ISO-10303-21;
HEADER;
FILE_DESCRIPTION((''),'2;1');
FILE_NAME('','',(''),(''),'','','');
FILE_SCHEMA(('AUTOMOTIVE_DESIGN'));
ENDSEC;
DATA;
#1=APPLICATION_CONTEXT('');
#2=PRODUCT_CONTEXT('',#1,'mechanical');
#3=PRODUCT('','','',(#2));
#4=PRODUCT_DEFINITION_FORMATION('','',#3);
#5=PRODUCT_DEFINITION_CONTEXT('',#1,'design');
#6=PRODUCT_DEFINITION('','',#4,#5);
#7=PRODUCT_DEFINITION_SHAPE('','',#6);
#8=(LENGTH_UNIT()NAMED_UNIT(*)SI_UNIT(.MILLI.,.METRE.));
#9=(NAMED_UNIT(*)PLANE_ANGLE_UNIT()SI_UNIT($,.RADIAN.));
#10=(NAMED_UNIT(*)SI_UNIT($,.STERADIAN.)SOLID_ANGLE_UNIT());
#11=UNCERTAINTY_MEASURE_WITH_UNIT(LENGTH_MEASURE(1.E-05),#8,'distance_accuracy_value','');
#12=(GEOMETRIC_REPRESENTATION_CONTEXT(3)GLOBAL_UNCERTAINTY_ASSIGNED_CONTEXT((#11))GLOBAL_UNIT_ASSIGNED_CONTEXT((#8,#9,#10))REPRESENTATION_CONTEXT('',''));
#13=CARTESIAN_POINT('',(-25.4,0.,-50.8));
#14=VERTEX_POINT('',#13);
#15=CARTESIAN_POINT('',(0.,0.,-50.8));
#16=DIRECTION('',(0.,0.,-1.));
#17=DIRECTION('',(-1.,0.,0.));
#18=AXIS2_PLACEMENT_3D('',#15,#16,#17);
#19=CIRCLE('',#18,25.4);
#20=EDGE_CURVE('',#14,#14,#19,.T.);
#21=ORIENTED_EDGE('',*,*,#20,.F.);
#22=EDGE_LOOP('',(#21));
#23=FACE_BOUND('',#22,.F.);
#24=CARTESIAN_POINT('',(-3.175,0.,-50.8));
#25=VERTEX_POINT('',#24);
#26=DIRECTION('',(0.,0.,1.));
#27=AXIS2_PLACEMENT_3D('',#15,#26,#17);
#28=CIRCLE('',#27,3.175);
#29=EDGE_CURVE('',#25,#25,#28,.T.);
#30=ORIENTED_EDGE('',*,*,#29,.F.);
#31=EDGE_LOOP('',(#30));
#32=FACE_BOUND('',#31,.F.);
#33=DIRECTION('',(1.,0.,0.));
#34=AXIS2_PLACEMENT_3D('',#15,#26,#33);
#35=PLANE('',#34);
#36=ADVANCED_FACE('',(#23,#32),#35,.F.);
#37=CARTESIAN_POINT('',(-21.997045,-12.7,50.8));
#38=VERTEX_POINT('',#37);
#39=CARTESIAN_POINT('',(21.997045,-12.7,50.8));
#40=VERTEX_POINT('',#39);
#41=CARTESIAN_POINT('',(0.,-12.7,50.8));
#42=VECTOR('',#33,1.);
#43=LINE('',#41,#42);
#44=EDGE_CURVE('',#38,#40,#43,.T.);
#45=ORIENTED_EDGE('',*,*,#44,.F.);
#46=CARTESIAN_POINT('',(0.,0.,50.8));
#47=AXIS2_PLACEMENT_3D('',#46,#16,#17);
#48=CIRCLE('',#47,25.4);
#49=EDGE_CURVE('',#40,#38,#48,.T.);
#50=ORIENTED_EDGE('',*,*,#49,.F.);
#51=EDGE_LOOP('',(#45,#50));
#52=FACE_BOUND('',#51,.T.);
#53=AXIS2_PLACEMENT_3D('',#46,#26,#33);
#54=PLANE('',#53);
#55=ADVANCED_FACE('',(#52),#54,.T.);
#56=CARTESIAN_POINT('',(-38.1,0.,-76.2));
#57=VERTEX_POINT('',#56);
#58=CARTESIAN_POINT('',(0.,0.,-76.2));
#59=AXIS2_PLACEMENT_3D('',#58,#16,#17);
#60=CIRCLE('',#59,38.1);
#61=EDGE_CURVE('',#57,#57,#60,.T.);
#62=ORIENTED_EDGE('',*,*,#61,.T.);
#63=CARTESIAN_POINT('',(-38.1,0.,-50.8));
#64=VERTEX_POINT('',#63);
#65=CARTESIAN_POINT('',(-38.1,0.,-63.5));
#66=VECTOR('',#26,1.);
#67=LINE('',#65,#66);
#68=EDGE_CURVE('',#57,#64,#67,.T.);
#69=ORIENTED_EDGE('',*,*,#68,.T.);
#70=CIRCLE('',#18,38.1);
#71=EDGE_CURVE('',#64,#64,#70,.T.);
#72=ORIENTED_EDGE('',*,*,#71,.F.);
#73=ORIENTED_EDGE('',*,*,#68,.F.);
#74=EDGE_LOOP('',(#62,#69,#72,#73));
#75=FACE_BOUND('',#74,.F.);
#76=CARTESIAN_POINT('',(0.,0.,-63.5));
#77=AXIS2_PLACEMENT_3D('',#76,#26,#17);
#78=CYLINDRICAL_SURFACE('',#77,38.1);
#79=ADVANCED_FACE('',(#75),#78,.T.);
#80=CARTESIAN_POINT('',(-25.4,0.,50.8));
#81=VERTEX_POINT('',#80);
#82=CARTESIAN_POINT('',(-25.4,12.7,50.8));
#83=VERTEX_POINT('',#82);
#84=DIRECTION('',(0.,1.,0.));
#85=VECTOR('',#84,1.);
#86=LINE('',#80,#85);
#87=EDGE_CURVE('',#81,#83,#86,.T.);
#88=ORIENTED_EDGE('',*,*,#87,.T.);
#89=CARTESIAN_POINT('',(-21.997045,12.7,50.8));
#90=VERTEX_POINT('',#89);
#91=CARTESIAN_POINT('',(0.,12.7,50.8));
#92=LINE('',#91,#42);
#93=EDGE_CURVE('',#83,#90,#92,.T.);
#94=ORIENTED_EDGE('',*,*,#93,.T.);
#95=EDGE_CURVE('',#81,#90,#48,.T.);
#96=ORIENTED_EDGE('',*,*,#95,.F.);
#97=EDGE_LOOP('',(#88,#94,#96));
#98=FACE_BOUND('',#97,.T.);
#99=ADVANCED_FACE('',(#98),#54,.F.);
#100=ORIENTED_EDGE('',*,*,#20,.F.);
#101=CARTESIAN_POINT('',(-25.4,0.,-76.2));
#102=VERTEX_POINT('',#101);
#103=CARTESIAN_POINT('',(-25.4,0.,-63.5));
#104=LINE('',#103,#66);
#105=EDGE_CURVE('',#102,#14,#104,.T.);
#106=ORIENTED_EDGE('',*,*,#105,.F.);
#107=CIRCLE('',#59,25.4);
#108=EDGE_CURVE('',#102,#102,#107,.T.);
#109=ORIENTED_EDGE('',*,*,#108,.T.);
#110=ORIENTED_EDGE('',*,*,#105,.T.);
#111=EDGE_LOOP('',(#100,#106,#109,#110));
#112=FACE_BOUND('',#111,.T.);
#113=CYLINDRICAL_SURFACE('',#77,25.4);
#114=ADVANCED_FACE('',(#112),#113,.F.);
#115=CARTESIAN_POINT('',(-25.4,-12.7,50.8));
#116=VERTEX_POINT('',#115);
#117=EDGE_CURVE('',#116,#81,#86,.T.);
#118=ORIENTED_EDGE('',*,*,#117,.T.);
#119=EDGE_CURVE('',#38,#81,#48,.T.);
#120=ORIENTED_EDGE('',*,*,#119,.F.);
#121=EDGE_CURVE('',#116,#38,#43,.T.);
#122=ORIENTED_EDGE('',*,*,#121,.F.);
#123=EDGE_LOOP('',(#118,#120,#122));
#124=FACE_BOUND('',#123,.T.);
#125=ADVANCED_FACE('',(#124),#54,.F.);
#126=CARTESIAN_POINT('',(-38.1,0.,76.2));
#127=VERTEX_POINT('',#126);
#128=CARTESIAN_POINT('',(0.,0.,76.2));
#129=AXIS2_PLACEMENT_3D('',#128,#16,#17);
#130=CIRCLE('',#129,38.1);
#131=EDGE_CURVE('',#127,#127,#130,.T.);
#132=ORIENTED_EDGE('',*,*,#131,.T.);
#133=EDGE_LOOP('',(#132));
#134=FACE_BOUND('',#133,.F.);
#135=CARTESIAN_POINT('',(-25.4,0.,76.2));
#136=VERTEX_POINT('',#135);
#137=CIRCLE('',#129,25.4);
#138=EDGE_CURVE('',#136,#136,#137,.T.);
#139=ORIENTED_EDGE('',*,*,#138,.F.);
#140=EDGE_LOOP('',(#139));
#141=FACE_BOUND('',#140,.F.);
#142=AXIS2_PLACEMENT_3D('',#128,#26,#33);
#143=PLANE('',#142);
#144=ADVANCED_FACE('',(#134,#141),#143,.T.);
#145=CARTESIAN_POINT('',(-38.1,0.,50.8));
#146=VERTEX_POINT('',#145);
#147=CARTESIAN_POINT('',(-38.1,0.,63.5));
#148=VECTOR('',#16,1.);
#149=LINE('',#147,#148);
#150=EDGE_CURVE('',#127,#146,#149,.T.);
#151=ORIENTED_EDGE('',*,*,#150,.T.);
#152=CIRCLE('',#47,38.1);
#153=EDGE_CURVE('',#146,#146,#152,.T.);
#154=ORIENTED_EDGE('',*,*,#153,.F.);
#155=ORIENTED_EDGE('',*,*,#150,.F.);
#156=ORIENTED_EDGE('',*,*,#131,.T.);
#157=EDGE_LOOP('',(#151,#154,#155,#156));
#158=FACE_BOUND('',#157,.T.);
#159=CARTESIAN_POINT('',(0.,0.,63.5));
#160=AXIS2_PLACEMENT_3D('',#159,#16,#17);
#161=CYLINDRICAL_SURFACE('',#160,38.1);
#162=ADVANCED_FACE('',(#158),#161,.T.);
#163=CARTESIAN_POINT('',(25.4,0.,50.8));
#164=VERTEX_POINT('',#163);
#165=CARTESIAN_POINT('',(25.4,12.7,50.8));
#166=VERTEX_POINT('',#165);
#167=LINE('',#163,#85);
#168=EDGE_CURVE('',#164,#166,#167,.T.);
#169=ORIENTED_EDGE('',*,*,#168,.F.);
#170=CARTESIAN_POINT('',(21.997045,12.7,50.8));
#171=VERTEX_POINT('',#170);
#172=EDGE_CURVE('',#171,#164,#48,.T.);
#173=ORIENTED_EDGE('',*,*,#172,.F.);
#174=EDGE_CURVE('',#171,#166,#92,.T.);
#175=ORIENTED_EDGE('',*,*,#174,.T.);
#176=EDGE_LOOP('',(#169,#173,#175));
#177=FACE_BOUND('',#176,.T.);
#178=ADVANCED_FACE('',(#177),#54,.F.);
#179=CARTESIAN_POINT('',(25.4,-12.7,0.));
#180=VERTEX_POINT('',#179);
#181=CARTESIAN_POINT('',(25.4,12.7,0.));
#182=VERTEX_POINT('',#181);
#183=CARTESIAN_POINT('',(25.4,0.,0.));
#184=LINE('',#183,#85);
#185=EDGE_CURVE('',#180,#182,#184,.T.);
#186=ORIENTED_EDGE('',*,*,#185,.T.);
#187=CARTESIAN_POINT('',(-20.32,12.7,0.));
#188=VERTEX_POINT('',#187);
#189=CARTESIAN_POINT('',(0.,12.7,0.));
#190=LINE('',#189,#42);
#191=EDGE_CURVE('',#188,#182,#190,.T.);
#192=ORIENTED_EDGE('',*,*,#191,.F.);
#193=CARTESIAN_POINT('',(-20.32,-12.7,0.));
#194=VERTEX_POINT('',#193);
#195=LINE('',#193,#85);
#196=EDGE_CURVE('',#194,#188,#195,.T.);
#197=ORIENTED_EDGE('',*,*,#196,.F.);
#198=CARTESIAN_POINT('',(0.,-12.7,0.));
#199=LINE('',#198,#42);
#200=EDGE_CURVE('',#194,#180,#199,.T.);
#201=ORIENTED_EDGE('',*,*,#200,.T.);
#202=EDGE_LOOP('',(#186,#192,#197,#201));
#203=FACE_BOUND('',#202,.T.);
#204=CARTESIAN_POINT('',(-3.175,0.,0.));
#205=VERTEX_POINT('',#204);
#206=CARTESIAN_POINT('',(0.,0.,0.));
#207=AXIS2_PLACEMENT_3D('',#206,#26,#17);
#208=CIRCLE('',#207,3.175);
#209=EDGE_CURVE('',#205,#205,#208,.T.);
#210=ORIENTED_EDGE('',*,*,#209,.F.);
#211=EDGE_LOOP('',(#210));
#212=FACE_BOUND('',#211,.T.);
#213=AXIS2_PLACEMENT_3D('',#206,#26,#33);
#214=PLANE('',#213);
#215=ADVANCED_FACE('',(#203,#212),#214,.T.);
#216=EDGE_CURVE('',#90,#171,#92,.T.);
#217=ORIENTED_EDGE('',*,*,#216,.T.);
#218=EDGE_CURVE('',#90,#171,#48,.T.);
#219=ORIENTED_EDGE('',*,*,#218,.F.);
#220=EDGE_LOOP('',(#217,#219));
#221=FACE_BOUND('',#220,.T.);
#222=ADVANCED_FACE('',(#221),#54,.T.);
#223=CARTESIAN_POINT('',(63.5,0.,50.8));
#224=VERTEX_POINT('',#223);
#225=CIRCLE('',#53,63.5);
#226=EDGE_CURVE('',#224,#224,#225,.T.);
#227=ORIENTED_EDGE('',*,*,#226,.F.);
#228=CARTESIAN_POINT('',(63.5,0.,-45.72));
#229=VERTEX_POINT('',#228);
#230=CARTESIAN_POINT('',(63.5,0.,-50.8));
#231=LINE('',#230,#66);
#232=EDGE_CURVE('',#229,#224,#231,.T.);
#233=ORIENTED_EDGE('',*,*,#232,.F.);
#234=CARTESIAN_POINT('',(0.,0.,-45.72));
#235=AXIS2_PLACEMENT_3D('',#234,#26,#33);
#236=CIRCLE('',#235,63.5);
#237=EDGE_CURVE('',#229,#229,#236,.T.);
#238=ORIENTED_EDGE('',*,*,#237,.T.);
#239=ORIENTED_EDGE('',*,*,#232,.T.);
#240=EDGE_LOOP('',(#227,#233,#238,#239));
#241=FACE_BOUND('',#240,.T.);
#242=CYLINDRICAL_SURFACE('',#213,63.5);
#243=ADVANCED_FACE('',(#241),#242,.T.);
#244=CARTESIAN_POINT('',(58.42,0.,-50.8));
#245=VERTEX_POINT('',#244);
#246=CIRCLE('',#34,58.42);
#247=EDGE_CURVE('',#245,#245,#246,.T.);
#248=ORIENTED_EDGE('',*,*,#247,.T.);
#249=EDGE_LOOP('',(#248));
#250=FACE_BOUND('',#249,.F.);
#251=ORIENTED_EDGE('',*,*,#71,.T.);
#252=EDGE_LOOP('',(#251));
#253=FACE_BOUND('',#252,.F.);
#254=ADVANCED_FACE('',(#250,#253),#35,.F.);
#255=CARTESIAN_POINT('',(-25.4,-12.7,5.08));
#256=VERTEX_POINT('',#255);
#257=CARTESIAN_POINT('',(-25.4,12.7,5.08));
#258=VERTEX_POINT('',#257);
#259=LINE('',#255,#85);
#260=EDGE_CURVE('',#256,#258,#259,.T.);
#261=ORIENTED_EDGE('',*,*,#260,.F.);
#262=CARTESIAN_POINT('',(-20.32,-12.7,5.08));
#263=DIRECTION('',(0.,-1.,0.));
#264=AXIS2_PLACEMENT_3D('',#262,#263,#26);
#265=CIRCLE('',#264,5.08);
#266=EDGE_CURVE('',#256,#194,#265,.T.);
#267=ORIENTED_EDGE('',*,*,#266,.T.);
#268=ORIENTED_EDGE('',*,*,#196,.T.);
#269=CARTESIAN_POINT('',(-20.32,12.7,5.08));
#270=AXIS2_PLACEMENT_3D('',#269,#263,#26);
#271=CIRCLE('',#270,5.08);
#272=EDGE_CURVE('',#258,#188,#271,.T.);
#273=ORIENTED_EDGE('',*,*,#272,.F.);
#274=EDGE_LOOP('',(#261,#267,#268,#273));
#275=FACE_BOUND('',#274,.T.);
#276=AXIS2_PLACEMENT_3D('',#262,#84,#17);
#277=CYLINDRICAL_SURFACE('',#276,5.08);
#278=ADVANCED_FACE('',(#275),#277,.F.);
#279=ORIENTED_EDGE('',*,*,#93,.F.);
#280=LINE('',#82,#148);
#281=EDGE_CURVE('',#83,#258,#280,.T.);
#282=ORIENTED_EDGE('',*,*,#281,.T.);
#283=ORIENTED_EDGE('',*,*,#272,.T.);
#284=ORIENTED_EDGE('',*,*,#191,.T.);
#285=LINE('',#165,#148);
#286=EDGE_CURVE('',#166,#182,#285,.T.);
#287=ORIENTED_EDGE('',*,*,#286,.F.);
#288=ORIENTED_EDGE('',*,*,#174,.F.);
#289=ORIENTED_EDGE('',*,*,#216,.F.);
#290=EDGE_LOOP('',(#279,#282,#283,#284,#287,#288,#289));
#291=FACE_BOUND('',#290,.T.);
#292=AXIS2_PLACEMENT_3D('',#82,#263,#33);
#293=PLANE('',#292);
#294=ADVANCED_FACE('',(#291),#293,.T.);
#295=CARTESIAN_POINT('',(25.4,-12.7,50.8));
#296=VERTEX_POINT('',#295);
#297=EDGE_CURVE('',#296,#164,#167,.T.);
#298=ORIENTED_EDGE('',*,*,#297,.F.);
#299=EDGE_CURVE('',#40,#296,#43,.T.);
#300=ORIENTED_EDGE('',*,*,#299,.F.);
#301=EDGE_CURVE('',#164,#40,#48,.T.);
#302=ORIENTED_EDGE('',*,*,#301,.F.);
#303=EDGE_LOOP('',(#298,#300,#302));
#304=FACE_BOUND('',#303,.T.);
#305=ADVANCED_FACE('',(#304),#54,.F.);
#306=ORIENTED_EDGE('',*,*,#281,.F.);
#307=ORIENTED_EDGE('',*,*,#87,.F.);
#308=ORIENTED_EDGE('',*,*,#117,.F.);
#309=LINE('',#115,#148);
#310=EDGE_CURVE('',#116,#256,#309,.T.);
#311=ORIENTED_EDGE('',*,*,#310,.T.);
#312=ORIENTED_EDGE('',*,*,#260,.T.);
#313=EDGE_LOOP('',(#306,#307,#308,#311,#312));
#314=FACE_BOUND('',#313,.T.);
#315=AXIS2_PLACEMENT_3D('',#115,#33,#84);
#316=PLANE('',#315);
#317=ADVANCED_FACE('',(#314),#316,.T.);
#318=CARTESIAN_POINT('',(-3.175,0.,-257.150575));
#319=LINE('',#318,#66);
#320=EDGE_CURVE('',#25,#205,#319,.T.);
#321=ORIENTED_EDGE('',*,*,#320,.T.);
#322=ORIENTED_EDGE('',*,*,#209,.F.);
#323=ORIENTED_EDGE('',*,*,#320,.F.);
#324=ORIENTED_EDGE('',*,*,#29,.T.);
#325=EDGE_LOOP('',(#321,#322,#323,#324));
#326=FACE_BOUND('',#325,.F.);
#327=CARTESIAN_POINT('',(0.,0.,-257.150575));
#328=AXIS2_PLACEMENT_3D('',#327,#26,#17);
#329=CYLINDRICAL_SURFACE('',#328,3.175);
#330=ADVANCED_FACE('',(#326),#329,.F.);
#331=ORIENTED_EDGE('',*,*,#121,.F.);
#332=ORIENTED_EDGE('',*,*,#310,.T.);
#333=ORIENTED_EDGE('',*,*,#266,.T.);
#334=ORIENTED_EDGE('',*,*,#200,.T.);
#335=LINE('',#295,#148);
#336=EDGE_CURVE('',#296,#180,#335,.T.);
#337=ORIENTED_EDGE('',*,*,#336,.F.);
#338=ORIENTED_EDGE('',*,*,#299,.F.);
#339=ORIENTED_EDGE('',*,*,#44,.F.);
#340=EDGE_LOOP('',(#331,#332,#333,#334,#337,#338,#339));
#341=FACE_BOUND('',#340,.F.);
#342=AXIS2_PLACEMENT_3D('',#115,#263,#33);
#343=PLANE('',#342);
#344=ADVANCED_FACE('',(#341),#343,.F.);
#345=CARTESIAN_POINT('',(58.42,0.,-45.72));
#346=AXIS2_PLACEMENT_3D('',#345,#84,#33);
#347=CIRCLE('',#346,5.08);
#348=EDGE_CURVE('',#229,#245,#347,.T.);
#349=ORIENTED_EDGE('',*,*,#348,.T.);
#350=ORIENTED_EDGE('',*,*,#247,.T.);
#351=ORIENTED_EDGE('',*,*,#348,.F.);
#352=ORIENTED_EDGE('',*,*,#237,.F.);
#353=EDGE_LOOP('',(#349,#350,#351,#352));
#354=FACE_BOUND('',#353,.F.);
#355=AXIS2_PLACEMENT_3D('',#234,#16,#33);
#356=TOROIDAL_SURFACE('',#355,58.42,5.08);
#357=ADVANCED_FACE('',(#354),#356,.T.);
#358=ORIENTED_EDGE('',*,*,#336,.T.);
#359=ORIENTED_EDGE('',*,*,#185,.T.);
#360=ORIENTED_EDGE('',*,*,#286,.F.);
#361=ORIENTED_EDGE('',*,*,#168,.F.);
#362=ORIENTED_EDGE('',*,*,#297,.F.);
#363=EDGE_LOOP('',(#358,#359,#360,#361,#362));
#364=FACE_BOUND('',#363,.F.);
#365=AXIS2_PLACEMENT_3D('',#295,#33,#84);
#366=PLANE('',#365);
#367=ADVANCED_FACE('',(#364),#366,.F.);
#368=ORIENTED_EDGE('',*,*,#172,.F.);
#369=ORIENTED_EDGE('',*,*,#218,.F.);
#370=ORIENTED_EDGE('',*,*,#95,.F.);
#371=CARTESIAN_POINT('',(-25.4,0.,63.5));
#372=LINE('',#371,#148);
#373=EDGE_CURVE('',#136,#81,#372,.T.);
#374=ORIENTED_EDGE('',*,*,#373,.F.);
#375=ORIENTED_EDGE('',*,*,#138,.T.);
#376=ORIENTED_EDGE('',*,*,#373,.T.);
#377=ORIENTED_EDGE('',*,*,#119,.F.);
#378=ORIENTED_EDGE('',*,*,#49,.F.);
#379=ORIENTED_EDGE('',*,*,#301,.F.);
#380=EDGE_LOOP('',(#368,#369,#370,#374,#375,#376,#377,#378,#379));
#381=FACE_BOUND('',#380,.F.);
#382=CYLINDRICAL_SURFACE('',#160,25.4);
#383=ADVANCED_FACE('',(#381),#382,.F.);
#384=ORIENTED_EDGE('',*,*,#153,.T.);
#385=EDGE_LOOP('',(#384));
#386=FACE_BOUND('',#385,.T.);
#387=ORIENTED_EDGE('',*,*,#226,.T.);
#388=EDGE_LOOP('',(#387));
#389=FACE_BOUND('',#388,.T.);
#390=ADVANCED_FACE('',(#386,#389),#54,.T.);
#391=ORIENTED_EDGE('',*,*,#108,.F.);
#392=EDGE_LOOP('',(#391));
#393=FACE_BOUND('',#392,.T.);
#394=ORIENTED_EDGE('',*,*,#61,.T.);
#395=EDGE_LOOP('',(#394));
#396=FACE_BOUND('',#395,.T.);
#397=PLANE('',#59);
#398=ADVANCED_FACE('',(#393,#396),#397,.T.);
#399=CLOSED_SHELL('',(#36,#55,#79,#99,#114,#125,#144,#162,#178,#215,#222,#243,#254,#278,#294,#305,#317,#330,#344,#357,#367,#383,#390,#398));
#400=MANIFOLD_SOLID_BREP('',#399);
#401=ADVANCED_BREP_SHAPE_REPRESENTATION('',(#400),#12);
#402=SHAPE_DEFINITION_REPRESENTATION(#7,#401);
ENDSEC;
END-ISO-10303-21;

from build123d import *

# Parameters (mm, degrees)
F0_R     = 63.5
F1_DEPTH = 50.8
F2_W     = 50.8
F2_H     = 25.4
F3_DEPTH = 50.8
F5_D     = 6.35
F6_R     = 5.08
F7_R     = 5.08
F8_W     = 12.7
F8_H     = 25.4


# Not quite as in the source:
# - a pattern or mirror of a feature is missing from the dataset's text; its kind, count and spacing are read off the source's solid


with BuildPart() as f1:
    # F0 (on Top) → F1 (new body, symmetric)
    with BuildSketch(Plane.XY):
        Circle(F0_R)
    extrude(amount=F1_DEPTH, both=True)

    # F2 (on face) → F3 (cut)
    with BuildSketch(Plane.XY.offset(50.8)):
        Rectangle(F2_W, F2_H)
    extrude(amount=-F3_DEPTH, mode=Mode.SUBTRACT)

    # F5 (through all)
    with Locations(Plane(origin=(0, 0, -50.8), x_dir=(1, 0, 0), z_dir=(0, 0, -1))):
        with Locations((0, 0)):
            Hole(F5_D / 2)

    # F6
    f6_edges = [f1.edges().sort_by_distance(p)[0] for p in [
        (-63.5, 0, -50.8),
    ]]
    fillet(f6_edges, radius=F6_R)

    # F7
    f7_edges = [f1.edges().sort_by_distance(p)[0] for p in [
        (-25.4, 0, 0),
    ]]
    fillet(f7_edges, radius=F7_R)

    # F8 (on Front) → F9 (revolve)
    with BuildSketch(Plane.XZ):
        with Locations((-31.75, -63.5)):
            Rectangle(F8_W, F8_H)
    f9 = revolve(axis=Axis((0, 0, 19.3926589563), (0, 0, -1)))

    # F9_copies: F9 across plane
    add(f9.mirror(Plane.XY))


solid = f1.part
